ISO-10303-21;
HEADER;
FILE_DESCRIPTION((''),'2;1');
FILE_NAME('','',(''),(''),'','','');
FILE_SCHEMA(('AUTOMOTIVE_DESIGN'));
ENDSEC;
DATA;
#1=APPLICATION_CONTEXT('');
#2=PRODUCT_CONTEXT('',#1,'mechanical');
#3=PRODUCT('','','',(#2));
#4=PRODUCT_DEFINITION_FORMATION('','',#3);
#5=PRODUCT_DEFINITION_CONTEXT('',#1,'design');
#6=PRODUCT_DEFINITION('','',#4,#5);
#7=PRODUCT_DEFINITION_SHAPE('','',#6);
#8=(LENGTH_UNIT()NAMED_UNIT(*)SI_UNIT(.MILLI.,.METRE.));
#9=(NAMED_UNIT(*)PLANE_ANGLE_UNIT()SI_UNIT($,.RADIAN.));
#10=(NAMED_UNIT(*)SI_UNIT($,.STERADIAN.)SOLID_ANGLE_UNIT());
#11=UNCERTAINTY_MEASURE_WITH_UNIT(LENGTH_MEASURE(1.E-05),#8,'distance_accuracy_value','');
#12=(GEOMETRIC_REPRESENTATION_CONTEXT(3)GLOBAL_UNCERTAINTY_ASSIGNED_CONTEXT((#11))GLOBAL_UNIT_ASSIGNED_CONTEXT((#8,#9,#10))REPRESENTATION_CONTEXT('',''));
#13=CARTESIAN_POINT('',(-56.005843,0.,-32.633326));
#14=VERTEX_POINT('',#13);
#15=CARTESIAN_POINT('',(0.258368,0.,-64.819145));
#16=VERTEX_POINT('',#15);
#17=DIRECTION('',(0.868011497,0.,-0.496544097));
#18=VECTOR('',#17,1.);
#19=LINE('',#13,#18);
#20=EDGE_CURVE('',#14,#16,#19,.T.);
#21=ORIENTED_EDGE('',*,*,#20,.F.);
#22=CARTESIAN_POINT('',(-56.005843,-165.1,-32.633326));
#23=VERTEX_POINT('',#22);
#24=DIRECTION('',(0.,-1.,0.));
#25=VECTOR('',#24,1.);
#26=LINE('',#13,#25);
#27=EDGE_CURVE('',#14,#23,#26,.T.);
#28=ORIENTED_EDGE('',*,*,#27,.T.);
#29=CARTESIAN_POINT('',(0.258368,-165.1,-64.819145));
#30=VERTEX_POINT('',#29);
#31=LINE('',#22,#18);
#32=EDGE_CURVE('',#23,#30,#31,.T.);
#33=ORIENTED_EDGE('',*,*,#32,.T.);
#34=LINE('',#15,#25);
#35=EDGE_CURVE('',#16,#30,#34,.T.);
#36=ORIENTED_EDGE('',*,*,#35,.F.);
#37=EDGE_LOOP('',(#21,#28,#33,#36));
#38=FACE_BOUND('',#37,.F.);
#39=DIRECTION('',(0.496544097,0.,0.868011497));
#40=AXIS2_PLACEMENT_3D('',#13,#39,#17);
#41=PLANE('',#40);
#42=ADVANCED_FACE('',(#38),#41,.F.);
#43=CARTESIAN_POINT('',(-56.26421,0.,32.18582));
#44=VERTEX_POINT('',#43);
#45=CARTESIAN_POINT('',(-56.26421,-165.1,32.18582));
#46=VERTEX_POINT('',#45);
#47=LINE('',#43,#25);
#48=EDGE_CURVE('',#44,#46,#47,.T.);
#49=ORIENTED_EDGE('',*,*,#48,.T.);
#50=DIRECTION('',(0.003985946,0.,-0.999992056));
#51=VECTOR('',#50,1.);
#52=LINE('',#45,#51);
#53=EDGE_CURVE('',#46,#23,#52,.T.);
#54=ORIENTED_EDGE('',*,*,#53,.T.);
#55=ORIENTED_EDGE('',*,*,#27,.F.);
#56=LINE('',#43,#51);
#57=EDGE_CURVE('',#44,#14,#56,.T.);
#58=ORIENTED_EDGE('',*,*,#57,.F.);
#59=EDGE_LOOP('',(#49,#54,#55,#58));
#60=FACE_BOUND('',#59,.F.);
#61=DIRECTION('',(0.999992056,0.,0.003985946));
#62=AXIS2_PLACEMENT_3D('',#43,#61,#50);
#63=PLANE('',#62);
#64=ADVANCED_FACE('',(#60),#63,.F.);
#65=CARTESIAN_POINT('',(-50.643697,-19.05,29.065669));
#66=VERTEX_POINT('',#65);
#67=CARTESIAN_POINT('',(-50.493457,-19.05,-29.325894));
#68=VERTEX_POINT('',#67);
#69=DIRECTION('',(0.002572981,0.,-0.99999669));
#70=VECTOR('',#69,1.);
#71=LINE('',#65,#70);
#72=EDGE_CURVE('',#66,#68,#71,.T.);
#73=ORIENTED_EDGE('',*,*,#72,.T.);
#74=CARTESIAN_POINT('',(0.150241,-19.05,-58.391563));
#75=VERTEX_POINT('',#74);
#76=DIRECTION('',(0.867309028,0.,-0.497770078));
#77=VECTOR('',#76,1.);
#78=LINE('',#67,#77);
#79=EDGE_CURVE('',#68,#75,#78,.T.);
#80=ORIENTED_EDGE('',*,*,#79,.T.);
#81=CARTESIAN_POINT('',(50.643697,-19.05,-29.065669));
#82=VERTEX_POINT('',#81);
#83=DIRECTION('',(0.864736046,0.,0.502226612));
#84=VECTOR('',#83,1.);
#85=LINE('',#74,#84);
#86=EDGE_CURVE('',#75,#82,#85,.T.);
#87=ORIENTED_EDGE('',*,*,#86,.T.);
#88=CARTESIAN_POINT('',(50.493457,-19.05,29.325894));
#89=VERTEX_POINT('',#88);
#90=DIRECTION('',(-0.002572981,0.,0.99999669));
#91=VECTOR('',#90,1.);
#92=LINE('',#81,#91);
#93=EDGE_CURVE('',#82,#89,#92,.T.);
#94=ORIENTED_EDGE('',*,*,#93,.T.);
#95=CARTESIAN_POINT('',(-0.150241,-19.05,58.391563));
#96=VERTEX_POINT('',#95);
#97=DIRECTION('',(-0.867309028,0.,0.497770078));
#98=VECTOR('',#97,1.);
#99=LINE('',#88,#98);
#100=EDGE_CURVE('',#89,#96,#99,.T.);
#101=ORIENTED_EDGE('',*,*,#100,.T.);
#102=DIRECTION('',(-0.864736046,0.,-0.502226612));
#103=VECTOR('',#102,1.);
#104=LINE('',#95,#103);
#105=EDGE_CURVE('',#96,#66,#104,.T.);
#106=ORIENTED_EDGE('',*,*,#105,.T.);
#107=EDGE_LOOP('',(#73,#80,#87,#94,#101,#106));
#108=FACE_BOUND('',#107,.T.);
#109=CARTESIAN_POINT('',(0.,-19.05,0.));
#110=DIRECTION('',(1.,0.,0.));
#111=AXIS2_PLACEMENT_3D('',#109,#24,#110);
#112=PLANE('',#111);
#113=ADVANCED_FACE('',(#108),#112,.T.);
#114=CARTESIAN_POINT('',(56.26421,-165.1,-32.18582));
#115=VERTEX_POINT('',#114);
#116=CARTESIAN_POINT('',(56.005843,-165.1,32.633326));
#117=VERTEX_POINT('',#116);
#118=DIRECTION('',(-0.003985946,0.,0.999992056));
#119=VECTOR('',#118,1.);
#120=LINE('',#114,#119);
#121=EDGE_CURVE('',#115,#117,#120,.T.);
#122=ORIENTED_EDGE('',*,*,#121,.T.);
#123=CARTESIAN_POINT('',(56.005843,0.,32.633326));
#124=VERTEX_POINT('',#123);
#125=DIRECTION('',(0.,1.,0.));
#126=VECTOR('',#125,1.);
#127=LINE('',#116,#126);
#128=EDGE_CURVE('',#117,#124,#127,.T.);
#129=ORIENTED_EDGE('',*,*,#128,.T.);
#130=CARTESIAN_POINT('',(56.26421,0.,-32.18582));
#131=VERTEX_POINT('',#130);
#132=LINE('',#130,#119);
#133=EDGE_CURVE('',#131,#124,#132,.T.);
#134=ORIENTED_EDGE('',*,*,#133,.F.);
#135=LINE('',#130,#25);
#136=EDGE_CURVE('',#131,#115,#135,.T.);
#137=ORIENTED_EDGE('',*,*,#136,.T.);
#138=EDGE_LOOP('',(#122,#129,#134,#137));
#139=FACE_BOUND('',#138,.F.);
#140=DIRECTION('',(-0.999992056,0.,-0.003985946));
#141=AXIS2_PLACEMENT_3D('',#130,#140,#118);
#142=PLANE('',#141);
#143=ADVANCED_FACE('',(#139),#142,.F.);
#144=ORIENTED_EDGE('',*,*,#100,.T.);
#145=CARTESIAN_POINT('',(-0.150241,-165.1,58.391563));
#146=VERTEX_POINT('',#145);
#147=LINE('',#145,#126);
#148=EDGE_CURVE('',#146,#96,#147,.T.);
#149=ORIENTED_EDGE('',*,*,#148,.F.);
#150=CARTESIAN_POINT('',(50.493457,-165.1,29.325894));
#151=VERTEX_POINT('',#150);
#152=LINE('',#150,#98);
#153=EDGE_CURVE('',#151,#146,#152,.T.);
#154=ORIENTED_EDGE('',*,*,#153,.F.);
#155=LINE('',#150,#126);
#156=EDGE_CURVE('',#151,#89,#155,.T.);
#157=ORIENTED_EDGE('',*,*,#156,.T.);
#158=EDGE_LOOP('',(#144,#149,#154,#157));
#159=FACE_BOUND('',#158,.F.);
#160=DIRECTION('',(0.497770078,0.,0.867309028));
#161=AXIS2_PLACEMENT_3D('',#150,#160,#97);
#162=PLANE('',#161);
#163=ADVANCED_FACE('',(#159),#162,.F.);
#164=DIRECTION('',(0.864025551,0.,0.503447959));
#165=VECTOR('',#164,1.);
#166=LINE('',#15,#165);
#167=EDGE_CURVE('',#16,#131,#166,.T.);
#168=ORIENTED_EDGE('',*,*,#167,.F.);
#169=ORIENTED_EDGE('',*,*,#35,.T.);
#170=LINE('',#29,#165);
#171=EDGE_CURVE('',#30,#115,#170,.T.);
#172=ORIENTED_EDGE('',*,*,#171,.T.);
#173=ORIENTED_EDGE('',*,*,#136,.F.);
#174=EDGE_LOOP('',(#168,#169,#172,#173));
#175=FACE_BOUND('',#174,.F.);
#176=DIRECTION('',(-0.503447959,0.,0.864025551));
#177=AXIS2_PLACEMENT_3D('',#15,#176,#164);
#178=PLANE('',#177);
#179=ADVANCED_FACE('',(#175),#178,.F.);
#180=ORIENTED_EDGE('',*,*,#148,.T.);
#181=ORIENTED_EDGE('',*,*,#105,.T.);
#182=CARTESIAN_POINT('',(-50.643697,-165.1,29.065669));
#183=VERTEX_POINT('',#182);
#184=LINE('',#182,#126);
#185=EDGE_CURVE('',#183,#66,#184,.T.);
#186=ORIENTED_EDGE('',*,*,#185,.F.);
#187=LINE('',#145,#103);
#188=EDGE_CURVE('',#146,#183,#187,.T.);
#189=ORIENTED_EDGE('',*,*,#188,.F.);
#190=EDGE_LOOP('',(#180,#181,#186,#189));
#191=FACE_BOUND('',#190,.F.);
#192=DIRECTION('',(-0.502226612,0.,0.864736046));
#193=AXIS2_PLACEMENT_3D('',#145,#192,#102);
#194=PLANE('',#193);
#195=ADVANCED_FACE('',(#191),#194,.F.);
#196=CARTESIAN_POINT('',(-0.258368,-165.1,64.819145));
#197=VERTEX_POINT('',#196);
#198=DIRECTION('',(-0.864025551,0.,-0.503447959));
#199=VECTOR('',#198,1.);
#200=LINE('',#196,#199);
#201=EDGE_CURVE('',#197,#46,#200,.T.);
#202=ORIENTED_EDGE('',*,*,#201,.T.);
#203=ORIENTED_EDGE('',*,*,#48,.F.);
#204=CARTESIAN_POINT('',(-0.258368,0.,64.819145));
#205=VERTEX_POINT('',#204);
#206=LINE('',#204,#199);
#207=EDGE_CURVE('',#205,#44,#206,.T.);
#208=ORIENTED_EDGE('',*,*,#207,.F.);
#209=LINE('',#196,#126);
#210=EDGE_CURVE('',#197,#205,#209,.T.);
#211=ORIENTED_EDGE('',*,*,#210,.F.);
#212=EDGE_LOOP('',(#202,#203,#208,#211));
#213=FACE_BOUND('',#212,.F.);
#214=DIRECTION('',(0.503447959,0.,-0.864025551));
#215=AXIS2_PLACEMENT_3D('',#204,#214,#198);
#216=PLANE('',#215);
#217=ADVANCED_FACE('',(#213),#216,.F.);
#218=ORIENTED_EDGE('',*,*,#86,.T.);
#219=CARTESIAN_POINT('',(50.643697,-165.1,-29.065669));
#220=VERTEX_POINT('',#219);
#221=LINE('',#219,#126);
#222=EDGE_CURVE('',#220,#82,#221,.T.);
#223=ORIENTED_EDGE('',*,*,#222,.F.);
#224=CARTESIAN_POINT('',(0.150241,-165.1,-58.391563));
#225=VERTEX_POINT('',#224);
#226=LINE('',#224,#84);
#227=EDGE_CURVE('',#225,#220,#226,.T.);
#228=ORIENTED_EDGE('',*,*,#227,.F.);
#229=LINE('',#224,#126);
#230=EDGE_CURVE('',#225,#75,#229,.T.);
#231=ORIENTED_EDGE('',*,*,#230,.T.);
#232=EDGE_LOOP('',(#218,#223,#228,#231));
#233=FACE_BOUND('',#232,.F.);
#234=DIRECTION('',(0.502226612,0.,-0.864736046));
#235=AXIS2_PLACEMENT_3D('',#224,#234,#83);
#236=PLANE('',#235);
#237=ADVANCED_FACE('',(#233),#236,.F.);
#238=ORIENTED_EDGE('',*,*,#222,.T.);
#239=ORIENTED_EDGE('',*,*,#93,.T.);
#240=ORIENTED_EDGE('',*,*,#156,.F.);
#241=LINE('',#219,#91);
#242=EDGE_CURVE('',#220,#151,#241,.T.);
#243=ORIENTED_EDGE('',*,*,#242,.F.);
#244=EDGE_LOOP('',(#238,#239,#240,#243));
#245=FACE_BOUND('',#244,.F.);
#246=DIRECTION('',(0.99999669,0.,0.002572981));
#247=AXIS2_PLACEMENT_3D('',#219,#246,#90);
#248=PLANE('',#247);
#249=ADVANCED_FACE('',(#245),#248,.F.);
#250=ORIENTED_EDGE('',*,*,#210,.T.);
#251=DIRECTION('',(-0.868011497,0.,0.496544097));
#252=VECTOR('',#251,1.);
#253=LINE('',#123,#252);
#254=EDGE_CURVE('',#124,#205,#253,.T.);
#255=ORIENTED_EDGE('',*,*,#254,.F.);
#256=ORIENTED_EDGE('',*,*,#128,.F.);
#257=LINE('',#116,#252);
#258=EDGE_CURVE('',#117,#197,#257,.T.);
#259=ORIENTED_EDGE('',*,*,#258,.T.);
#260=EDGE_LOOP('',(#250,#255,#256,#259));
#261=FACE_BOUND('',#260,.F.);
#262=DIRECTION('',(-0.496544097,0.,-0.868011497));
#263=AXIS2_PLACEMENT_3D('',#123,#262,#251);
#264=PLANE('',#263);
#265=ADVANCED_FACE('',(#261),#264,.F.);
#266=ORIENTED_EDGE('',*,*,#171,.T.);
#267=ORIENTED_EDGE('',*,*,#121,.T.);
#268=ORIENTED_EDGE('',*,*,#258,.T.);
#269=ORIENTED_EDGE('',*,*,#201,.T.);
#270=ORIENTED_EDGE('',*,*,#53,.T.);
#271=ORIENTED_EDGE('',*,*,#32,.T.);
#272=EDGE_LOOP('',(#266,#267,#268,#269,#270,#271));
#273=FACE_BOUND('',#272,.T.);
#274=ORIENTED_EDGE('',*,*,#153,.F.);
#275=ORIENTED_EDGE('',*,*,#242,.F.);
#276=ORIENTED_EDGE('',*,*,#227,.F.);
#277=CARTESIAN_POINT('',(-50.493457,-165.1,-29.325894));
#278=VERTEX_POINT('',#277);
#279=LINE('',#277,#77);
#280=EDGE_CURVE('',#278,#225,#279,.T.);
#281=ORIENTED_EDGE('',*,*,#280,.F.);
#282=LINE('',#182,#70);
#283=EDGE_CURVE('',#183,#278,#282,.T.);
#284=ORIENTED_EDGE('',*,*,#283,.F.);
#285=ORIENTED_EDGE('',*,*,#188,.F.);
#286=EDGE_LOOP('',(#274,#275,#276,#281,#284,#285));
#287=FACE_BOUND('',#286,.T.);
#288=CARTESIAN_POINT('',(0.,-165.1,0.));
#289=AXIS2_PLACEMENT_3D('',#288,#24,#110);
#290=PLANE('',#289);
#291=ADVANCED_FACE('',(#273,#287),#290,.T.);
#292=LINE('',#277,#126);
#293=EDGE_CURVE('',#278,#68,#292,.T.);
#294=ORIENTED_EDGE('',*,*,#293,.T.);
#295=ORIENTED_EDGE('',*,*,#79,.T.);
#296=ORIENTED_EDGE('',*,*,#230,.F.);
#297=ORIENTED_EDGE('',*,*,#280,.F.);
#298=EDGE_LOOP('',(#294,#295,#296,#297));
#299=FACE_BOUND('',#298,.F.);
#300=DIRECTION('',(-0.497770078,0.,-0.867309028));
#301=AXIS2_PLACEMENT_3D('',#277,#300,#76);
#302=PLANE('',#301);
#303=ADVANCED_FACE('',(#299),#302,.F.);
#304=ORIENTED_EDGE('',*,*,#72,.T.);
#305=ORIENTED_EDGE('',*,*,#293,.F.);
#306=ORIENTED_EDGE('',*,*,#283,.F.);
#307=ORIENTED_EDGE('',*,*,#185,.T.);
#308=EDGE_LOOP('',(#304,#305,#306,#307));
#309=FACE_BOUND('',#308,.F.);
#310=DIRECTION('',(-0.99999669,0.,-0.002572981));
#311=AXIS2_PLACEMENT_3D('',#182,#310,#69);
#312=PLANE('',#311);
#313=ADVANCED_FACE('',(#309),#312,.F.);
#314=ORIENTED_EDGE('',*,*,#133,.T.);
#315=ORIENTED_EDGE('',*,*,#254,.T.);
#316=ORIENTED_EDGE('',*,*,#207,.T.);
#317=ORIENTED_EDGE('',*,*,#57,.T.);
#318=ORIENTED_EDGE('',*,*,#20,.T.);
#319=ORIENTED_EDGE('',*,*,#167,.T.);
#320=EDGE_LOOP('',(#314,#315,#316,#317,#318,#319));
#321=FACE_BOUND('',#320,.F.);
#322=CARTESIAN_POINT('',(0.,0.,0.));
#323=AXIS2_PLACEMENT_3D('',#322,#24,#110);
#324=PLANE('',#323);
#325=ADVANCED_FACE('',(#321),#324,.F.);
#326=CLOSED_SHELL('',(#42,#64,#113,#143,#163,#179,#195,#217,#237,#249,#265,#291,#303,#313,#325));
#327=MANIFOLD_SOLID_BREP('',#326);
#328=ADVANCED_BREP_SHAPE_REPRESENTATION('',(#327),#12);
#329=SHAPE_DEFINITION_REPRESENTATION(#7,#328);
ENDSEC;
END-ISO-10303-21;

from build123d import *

# Parameters (mm, degrees)
F1_DEPTH = 165.1
F2_DEPTH = 127
F4_DEPTH = 146.05


# Not quite as in the source:
# - a feature names something its author has since deleted; it is built from what else it names


with BuildPart() as f1:
    # F0 (on Front) → F1 (new body)
    with BuildSketch(Plane.XZ):
        Polygon((-0.2583676879, 64.8191452859), (-56.2642103132, 32.1858196618), (-56.0058426253, -32.6333256242), (0.2583676879, -64.8191452859), (56.2642103132, -32.1858196618), (56.0058426253, 32.6333256242), align=None)
    extrude(amount=F1_DEPTH)

    # F0 (on Front) → F2 (join)
    with BuildSketch(Plane.XZ):
        Polygon((-0.2583676879, 64.8191452859), (-56.2642103132, 32.1858196618), (-56.0058426253, -32.6333256242), (0.2583676879, -64.8191452859), (56.2642103132, -32.1858196618), (56.0058426253, 32.6333256242), align=None)
    extrude(amount=F2_DEPTH)

    # F3 (on face) → F4 (cut)
    with BuildSketch(Plane.XZ.offset(165.1)):
        Polygon((-0.1502408993, 58.3915630752), (-50.6436974394, 29.0656691021), (-50.4934565401, -29.3258939731), (0.1502408993, -58.3915630752), (50.6436974394, -29.0656691021), (50.4934565401, 29.3258939731), align=None)
    extrude(amount=-F4_DEPTH, mode=Mode.SUBTRACT)


solid = f1.part
